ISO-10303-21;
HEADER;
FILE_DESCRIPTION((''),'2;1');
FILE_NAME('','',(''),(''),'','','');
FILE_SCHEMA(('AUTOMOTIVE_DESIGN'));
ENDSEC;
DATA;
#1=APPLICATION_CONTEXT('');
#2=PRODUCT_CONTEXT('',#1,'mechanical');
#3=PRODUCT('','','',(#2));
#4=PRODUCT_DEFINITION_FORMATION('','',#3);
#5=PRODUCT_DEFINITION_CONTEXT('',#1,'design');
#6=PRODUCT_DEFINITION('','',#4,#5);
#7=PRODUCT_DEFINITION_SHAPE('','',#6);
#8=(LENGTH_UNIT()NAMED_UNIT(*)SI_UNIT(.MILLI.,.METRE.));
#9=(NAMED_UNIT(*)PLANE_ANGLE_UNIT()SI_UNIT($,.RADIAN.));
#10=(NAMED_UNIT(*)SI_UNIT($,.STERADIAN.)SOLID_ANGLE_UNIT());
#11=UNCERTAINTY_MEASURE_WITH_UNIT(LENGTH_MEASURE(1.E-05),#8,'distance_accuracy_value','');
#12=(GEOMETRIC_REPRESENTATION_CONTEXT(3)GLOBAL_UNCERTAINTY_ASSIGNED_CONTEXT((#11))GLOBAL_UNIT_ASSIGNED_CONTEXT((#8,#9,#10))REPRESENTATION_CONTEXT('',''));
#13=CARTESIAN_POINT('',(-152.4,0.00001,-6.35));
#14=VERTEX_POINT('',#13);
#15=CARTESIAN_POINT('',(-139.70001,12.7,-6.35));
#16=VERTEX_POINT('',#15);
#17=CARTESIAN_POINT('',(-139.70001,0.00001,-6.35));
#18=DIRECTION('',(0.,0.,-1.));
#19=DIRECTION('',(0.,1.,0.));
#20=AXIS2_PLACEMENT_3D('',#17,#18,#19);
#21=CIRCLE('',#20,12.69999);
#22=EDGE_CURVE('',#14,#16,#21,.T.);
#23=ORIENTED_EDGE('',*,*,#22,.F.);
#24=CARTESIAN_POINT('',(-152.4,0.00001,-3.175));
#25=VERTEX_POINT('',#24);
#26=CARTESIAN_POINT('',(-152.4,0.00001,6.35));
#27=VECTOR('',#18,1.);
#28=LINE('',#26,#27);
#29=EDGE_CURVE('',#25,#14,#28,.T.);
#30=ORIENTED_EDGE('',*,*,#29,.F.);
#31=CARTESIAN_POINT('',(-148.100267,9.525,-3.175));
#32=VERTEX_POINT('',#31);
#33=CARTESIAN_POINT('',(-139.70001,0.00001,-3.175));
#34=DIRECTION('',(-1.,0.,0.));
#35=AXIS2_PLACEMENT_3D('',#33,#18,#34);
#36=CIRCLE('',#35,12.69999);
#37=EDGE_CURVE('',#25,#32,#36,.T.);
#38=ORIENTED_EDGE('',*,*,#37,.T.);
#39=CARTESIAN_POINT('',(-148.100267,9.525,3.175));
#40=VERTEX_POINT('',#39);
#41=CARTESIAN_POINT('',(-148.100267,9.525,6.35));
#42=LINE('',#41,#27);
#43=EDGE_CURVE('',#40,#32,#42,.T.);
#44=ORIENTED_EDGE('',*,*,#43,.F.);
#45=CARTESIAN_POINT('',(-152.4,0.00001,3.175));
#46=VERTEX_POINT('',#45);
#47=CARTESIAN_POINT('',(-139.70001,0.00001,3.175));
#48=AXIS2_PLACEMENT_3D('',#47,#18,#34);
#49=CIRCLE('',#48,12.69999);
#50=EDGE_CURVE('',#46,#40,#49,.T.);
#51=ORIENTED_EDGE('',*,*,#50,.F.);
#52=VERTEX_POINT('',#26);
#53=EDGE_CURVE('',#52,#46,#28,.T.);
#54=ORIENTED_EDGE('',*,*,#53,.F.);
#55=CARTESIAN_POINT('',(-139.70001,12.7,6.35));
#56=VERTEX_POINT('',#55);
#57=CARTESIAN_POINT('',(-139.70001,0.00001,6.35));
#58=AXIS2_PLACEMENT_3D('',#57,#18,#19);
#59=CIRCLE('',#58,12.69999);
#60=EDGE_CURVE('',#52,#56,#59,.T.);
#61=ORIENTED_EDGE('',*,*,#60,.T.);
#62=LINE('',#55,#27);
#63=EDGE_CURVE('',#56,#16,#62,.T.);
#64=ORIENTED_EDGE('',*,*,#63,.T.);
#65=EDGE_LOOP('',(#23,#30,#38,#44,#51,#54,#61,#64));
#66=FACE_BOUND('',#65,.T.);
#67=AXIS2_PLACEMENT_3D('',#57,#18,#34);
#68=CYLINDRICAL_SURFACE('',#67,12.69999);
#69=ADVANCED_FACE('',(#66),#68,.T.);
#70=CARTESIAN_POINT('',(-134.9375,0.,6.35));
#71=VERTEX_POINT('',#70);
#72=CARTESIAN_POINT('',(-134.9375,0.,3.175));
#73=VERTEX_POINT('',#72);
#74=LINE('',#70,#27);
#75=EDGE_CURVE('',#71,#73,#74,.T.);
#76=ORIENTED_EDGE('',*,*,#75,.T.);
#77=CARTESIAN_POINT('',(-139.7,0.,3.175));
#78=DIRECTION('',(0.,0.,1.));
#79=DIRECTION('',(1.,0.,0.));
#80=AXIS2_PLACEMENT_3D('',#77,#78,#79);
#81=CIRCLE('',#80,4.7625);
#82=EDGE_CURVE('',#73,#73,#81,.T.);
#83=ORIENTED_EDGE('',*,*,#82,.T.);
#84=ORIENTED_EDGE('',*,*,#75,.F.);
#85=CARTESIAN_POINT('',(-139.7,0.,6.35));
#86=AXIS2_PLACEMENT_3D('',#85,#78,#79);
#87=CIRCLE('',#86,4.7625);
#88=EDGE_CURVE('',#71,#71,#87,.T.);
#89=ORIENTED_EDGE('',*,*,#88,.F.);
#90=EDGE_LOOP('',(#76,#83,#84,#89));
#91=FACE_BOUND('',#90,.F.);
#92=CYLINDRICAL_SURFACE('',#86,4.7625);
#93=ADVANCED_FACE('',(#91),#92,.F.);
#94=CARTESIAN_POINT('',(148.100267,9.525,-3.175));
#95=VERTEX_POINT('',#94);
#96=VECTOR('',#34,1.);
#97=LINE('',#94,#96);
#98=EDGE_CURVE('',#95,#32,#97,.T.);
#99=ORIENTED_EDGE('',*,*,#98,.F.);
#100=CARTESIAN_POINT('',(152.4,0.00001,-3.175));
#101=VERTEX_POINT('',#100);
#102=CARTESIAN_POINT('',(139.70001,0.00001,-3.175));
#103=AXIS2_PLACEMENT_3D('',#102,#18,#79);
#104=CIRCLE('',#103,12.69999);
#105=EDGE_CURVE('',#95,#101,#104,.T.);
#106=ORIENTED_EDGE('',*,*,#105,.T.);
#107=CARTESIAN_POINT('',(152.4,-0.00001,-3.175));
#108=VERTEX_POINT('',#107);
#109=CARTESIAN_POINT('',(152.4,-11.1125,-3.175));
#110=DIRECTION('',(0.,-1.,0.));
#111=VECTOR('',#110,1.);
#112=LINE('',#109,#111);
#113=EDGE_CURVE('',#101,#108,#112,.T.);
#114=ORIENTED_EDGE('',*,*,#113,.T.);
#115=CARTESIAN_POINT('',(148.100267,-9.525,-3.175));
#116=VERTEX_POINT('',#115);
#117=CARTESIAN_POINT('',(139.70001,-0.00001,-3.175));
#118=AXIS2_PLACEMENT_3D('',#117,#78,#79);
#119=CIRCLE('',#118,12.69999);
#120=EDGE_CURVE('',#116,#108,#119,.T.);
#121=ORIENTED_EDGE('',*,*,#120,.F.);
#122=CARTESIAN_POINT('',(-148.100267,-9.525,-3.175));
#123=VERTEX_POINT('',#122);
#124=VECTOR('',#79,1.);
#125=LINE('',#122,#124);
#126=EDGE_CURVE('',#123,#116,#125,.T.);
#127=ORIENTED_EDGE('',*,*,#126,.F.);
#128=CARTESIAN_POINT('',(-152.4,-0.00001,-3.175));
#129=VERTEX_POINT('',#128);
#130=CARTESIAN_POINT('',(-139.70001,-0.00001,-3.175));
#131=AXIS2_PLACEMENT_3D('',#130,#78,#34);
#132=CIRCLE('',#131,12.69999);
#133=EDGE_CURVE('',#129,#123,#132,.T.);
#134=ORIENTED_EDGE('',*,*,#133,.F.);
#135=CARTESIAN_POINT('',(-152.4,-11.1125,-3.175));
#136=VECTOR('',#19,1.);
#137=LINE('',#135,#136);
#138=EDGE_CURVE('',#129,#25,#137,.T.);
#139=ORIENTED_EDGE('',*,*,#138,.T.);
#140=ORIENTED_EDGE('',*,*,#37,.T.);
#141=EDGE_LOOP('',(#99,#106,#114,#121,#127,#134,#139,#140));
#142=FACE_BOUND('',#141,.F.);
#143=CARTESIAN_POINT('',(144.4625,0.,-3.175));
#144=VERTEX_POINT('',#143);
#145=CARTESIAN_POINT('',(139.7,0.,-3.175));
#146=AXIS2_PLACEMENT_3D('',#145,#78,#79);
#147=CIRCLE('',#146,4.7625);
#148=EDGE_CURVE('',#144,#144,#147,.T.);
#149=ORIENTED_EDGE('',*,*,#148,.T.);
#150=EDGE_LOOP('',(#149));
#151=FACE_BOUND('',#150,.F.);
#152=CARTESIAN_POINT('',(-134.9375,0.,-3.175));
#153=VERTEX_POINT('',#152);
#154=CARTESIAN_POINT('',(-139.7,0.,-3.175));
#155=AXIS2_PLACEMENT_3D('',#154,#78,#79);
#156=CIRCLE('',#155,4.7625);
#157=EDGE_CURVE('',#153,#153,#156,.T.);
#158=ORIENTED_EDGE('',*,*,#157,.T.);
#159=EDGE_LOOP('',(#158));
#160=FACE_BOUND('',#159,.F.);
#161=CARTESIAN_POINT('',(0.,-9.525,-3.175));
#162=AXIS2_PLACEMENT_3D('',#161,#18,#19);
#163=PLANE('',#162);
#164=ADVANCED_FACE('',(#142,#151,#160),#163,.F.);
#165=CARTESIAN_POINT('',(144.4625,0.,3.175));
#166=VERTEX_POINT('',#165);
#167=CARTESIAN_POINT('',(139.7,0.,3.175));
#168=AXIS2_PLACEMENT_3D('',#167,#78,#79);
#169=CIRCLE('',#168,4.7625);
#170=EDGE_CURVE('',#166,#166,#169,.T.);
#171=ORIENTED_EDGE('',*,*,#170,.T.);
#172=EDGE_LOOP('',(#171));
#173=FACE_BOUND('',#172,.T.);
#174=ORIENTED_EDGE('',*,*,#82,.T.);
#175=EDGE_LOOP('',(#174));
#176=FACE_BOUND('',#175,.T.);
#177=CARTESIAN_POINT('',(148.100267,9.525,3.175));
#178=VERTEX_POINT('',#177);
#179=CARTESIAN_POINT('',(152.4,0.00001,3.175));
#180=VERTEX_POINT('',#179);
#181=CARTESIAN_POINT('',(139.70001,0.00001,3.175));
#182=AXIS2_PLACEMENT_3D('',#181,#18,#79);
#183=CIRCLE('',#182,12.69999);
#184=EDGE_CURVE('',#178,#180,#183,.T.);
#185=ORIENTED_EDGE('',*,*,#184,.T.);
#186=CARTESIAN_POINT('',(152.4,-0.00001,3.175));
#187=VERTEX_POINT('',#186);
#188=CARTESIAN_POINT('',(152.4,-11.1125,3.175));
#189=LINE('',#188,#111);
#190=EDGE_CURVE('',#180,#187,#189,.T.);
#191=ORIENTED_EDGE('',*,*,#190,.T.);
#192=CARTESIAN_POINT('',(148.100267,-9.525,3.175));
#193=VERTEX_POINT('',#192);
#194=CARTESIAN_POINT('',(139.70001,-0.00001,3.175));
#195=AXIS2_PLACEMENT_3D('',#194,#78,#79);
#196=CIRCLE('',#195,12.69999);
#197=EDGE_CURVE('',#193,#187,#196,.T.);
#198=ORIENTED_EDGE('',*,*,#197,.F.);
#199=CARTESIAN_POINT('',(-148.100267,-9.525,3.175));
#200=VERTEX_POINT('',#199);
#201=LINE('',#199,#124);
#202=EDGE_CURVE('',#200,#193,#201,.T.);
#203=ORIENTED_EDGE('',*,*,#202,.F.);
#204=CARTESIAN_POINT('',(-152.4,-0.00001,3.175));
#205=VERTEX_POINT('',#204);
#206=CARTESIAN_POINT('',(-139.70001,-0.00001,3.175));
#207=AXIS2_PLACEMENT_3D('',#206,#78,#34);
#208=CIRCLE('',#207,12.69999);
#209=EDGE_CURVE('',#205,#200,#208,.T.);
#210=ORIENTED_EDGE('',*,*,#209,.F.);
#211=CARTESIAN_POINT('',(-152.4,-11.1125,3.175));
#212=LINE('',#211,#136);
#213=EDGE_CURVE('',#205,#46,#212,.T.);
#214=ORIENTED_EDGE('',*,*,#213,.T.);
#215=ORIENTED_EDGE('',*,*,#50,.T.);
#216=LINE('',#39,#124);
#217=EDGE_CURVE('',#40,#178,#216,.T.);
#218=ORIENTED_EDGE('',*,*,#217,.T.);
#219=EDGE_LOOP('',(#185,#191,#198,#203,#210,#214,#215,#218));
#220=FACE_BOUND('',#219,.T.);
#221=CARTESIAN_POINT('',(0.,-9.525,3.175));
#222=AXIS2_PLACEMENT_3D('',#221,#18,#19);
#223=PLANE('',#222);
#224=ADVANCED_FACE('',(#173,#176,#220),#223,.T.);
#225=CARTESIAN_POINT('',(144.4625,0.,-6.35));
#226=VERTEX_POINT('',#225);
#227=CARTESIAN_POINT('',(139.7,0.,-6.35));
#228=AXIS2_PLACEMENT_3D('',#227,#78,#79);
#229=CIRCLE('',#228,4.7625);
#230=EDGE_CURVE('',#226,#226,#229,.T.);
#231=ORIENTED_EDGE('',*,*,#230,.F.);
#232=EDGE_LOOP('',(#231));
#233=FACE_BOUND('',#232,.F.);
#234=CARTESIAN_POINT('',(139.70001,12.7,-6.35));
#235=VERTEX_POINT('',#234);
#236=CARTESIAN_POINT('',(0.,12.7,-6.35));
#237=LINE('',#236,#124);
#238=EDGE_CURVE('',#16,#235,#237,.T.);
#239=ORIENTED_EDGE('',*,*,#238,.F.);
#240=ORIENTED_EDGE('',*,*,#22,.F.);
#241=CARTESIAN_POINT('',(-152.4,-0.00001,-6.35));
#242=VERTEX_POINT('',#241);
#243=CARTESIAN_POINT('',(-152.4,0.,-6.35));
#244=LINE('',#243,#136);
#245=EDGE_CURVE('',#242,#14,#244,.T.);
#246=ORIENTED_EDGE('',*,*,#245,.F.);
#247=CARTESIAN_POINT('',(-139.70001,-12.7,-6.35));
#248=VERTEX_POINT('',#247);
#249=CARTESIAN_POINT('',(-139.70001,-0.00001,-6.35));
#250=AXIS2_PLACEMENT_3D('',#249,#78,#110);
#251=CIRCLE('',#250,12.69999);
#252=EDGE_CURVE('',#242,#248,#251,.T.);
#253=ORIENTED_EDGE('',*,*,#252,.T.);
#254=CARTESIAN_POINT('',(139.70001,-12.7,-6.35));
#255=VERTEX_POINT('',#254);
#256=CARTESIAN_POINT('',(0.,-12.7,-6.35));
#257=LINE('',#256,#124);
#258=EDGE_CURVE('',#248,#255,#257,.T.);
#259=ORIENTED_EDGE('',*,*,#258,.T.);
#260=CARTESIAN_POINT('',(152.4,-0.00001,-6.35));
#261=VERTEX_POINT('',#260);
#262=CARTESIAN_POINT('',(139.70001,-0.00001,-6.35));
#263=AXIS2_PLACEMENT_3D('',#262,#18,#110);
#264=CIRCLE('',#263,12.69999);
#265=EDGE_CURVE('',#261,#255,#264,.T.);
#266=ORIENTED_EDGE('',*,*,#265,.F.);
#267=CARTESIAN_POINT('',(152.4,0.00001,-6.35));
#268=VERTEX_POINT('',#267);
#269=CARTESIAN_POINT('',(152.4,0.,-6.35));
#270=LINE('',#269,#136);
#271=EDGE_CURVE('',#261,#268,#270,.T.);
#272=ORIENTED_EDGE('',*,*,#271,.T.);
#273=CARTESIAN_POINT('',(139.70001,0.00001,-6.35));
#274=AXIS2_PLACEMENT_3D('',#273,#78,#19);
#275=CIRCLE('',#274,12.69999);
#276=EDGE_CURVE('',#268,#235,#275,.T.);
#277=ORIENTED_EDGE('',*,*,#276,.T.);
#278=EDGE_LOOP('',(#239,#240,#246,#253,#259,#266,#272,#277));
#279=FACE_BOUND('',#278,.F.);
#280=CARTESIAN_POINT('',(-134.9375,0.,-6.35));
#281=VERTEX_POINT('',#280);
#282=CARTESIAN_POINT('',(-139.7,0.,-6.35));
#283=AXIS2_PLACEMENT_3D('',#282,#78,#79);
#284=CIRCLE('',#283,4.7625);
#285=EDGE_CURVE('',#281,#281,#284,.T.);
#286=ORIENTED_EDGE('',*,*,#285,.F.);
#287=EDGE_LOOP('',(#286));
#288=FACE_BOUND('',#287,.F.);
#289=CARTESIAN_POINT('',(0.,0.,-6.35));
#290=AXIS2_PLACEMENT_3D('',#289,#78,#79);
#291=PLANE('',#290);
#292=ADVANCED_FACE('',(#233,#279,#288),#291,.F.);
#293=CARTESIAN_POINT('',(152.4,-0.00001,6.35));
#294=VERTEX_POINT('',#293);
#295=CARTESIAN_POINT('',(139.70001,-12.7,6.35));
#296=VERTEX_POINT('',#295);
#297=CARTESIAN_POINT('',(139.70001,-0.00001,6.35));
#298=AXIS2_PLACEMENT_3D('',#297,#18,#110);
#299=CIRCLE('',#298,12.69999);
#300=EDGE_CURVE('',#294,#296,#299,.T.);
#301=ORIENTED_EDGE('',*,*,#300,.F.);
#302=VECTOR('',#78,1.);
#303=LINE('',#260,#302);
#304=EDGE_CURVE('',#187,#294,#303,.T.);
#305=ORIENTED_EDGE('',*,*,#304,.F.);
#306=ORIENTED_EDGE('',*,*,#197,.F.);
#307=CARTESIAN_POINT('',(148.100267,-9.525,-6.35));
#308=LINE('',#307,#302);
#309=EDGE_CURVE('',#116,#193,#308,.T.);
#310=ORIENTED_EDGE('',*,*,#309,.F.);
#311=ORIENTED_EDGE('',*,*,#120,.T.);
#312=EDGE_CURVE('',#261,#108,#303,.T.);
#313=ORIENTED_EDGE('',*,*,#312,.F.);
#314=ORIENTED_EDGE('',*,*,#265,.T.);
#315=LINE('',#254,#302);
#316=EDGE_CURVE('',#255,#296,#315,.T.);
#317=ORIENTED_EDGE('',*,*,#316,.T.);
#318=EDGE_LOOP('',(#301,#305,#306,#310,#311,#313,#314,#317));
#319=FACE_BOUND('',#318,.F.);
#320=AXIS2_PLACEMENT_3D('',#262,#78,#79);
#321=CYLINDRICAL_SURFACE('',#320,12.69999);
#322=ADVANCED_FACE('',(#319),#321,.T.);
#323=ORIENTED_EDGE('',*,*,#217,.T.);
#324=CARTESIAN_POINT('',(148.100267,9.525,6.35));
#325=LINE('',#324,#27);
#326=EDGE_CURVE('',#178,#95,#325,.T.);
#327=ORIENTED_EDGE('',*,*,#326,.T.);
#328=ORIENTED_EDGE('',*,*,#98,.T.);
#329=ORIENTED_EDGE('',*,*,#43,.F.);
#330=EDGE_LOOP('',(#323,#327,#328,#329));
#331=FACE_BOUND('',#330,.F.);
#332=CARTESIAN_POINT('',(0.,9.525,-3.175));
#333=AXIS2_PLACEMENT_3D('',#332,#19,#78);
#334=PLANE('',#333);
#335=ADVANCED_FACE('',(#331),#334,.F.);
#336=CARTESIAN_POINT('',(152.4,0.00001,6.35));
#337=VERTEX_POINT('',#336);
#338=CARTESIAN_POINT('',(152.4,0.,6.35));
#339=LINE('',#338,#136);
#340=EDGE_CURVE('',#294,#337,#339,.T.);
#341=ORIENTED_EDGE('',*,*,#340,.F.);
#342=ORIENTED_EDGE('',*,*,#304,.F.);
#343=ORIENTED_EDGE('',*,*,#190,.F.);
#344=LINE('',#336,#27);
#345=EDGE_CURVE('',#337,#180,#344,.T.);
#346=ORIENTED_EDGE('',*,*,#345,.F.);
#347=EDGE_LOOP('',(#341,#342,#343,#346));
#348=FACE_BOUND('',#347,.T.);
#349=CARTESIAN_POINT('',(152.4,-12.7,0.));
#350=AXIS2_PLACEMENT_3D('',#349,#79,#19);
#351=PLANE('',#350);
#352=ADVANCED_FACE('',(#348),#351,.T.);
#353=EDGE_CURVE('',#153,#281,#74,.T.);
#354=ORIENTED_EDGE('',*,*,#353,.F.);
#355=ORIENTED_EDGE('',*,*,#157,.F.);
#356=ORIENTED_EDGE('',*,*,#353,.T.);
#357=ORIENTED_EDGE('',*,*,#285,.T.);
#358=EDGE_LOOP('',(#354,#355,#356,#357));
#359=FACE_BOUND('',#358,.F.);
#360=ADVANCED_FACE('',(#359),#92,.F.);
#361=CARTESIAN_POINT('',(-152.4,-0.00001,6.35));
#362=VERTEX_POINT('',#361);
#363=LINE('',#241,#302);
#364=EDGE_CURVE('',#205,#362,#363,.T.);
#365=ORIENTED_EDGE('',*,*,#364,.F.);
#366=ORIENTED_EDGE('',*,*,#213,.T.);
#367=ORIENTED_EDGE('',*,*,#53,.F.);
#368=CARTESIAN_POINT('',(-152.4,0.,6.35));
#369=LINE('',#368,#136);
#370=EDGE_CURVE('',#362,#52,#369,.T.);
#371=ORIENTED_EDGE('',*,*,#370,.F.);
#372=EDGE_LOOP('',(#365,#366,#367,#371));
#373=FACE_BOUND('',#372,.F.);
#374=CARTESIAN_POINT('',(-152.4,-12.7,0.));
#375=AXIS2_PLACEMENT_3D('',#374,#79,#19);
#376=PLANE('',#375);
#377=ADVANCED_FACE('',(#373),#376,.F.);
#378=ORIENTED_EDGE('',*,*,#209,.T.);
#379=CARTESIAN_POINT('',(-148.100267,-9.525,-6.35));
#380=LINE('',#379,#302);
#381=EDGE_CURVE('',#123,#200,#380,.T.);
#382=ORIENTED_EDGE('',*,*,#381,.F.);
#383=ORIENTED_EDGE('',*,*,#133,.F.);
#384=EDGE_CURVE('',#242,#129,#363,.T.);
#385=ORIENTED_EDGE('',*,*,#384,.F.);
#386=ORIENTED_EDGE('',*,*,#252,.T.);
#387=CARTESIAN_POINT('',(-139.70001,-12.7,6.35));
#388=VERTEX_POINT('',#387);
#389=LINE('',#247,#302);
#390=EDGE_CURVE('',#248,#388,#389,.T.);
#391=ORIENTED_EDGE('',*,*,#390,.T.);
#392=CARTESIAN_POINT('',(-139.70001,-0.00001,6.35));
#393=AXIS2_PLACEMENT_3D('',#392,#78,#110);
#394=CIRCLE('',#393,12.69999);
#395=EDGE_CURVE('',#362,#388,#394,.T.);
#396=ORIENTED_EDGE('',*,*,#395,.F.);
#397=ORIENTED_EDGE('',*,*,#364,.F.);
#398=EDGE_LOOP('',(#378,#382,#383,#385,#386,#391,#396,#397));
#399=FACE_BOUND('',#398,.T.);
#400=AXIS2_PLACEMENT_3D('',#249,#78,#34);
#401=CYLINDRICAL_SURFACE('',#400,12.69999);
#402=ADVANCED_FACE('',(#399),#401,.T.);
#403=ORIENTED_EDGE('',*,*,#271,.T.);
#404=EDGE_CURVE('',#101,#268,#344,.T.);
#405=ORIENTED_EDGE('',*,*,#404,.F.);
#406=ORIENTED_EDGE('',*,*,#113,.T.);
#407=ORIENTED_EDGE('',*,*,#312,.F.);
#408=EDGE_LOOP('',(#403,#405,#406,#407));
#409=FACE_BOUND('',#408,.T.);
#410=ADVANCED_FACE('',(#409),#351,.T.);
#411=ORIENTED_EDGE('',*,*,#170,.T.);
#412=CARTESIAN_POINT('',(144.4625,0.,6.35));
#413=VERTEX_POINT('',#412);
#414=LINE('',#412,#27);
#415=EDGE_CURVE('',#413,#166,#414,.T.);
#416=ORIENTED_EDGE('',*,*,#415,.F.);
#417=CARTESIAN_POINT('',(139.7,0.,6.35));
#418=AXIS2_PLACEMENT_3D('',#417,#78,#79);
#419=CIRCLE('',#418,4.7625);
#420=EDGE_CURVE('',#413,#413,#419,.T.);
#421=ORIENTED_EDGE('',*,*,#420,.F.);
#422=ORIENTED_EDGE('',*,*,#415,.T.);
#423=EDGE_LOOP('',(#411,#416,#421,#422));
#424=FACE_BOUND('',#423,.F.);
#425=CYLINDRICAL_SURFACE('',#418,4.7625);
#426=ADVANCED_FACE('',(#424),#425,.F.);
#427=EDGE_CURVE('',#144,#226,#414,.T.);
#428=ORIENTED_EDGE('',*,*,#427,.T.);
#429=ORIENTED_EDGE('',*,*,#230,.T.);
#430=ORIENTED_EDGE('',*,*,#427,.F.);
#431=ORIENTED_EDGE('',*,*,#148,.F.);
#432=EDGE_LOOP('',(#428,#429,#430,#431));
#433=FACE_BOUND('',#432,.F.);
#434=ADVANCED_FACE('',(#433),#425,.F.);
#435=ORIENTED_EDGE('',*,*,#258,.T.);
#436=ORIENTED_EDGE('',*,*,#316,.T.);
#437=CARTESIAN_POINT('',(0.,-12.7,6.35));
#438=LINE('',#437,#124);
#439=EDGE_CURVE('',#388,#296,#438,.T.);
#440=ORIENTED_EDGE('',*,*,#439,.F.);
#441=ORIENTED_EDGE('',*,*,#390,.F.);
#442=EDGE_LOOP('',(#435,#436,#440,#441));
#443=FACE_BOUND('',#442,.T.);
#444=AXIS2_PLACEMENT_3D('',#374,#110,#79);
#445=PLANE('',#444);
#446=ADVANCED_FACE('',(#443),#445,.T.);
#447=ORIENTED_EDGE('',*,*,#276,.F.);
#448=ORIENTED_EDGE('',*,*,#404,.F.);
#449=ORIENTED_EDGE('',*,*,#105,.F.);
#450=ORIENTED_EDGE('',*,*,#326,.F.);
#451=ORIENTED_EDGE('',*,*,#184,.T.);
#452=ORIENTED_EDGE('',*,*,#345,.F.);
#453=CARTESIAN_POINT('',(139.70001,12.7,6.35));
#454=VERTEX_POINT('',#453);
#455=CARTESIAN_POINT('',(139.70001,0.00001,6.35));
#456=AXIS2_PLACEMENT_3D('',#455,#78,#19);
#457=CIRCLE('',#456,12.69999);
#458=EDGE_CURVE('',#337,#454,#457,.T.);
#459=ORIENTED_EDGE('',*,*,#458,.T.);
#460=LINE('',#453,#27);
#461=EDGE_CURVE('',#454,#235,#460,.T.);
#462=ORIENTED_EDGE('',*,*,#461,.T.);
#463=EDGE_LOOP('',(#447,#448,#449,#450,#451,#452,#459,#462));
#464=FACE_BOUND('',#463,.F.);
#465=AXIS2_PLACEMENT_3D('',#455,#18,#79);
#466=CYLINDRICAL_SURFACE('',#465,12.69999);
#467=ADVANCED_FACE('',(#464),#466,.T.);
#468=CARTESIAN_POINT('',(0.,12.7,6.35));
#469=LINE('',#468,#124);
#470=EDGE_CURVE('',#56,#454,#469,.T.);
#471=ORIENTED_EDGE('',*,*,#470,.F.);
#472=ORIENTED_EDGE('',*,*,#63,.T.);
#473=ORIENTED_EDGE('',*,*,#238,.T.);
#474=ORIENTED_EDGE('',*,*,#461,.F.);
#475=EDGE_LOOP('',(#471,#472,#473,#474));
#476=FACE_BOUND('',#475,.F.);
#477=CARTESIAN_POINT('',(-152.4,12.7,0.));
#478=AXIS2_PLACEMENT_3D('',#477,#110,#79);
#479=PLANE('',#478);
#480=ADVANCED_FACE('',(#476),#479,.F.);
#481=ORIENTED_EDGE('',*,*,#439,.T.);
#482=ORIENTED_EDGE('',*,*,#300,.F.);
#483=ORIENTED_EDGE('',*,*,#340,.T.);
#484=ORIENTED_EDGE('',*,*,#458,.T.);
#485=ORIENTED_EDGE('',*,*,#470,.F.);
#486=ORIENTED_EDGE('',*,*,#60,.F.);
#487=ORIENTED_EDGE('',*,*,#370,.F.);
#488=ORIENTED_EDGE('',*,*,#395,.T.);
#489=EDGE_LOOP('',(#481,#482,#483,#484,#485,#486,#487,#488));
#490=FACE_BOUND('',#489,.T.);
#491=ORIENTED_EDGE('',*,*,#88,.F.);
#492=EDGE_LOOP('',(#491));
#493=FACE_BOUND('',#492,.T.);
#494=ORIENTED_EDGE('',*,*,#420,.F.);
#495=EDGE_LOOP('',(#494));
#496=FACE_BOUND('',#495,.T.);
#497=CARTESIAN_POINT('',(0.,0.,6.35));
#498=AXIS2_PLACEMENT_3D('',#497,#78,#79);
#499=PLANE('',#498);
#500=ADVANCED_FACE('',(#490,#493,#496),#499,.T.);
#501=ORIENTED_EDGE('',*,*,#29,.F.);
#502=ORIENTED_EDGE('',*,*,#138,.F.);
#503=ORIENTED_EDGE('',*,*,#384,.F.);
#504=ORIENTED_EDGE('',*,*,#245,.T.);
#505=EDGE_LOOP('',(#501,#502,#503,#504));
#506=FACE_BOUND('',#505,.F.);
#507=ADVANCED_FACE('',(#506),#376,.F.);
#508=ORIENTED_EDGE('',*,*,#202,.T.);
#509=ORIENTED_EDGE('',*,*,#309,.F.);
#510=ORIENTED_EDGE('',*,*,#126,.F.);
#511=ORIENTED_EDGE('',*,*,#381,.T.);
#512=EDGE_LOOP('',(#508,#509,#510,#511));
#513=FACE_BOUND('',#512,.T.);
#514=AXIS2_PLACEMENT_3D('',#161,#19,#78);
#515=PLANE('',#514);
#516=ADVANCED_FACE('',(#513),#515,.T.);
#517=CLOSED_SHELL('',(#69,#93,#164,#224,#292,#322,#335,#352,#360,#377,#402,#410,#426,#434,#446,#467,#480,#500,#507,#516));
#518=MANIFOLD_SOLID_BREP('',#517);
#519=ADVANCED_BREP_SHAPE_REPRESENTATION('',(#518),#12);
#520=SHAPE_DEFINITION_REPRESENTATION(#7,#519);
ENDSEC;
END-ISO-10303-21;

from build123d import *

# Parameters (mm, degrees)
F0_W          = 304.8
F0_H          = 25.4
F1_DEPTH      = 6.35
F2_R          = 12.69999
F3_R          = 4.7625
F4_DEPTH      = 12.701
F5_W          = 19.05
F5_H          = 6.35
F6_DEPTH      = 152.401
F6_DEPTH_BACK = 152.401


# Not quite as in the source:
# - a fillet or chamfer is up to 0.001 mm smaller than in the source, because OpenCascade refuses the exact size


with BuildPart() as f1:
    # F0 (on Top) → F1 (new body, symmetric)
    with BuildSketch(Plane.XY):
        Rectangle(F0_W, F0_H)
    extrude(amount=F1_DEPTH, both=True)

    # F2 (radius 12.7 in the source; OpenCascade refuses exactly that, so slightly less here)
    f2_edges = [f1.edges().sort_by_distance(p)[0] for p in [
        (-152.4, 12.7, 0),
        (-152.4, -12.7, 0),
        (152.4, 12.7, 0),
        (152.4, -12.7, 0),
    ]]
    fillet(f2_edges, radius=F2_R)

    # F3 (on face) → F4 (cut, through all)
    with BuildSketch(Plane.XY.offset(6.35)):
        with Locations((-139.7, 0)):
            Circle(F3_R)
        with Locations((139.7, 0)):
            Circle(F3_R)
    extrude(amount=-F4_DEPTH, mode=Mode.SUBTRACT)

    # F5 (on Right) → F6 (cut, two sides)
    with BuildSketch(Plane.YZ) as f6_sk:
        Rectangle(F5_W, F5_H)
    extrude(amount=-F6_DEPTH, mode=Mode.SUBTRACT)
    extrude(f6_sk.sketch, amount=F6_DEPTH_BACK, mode=Mode.SUBTRACT)


solid = f1.part
